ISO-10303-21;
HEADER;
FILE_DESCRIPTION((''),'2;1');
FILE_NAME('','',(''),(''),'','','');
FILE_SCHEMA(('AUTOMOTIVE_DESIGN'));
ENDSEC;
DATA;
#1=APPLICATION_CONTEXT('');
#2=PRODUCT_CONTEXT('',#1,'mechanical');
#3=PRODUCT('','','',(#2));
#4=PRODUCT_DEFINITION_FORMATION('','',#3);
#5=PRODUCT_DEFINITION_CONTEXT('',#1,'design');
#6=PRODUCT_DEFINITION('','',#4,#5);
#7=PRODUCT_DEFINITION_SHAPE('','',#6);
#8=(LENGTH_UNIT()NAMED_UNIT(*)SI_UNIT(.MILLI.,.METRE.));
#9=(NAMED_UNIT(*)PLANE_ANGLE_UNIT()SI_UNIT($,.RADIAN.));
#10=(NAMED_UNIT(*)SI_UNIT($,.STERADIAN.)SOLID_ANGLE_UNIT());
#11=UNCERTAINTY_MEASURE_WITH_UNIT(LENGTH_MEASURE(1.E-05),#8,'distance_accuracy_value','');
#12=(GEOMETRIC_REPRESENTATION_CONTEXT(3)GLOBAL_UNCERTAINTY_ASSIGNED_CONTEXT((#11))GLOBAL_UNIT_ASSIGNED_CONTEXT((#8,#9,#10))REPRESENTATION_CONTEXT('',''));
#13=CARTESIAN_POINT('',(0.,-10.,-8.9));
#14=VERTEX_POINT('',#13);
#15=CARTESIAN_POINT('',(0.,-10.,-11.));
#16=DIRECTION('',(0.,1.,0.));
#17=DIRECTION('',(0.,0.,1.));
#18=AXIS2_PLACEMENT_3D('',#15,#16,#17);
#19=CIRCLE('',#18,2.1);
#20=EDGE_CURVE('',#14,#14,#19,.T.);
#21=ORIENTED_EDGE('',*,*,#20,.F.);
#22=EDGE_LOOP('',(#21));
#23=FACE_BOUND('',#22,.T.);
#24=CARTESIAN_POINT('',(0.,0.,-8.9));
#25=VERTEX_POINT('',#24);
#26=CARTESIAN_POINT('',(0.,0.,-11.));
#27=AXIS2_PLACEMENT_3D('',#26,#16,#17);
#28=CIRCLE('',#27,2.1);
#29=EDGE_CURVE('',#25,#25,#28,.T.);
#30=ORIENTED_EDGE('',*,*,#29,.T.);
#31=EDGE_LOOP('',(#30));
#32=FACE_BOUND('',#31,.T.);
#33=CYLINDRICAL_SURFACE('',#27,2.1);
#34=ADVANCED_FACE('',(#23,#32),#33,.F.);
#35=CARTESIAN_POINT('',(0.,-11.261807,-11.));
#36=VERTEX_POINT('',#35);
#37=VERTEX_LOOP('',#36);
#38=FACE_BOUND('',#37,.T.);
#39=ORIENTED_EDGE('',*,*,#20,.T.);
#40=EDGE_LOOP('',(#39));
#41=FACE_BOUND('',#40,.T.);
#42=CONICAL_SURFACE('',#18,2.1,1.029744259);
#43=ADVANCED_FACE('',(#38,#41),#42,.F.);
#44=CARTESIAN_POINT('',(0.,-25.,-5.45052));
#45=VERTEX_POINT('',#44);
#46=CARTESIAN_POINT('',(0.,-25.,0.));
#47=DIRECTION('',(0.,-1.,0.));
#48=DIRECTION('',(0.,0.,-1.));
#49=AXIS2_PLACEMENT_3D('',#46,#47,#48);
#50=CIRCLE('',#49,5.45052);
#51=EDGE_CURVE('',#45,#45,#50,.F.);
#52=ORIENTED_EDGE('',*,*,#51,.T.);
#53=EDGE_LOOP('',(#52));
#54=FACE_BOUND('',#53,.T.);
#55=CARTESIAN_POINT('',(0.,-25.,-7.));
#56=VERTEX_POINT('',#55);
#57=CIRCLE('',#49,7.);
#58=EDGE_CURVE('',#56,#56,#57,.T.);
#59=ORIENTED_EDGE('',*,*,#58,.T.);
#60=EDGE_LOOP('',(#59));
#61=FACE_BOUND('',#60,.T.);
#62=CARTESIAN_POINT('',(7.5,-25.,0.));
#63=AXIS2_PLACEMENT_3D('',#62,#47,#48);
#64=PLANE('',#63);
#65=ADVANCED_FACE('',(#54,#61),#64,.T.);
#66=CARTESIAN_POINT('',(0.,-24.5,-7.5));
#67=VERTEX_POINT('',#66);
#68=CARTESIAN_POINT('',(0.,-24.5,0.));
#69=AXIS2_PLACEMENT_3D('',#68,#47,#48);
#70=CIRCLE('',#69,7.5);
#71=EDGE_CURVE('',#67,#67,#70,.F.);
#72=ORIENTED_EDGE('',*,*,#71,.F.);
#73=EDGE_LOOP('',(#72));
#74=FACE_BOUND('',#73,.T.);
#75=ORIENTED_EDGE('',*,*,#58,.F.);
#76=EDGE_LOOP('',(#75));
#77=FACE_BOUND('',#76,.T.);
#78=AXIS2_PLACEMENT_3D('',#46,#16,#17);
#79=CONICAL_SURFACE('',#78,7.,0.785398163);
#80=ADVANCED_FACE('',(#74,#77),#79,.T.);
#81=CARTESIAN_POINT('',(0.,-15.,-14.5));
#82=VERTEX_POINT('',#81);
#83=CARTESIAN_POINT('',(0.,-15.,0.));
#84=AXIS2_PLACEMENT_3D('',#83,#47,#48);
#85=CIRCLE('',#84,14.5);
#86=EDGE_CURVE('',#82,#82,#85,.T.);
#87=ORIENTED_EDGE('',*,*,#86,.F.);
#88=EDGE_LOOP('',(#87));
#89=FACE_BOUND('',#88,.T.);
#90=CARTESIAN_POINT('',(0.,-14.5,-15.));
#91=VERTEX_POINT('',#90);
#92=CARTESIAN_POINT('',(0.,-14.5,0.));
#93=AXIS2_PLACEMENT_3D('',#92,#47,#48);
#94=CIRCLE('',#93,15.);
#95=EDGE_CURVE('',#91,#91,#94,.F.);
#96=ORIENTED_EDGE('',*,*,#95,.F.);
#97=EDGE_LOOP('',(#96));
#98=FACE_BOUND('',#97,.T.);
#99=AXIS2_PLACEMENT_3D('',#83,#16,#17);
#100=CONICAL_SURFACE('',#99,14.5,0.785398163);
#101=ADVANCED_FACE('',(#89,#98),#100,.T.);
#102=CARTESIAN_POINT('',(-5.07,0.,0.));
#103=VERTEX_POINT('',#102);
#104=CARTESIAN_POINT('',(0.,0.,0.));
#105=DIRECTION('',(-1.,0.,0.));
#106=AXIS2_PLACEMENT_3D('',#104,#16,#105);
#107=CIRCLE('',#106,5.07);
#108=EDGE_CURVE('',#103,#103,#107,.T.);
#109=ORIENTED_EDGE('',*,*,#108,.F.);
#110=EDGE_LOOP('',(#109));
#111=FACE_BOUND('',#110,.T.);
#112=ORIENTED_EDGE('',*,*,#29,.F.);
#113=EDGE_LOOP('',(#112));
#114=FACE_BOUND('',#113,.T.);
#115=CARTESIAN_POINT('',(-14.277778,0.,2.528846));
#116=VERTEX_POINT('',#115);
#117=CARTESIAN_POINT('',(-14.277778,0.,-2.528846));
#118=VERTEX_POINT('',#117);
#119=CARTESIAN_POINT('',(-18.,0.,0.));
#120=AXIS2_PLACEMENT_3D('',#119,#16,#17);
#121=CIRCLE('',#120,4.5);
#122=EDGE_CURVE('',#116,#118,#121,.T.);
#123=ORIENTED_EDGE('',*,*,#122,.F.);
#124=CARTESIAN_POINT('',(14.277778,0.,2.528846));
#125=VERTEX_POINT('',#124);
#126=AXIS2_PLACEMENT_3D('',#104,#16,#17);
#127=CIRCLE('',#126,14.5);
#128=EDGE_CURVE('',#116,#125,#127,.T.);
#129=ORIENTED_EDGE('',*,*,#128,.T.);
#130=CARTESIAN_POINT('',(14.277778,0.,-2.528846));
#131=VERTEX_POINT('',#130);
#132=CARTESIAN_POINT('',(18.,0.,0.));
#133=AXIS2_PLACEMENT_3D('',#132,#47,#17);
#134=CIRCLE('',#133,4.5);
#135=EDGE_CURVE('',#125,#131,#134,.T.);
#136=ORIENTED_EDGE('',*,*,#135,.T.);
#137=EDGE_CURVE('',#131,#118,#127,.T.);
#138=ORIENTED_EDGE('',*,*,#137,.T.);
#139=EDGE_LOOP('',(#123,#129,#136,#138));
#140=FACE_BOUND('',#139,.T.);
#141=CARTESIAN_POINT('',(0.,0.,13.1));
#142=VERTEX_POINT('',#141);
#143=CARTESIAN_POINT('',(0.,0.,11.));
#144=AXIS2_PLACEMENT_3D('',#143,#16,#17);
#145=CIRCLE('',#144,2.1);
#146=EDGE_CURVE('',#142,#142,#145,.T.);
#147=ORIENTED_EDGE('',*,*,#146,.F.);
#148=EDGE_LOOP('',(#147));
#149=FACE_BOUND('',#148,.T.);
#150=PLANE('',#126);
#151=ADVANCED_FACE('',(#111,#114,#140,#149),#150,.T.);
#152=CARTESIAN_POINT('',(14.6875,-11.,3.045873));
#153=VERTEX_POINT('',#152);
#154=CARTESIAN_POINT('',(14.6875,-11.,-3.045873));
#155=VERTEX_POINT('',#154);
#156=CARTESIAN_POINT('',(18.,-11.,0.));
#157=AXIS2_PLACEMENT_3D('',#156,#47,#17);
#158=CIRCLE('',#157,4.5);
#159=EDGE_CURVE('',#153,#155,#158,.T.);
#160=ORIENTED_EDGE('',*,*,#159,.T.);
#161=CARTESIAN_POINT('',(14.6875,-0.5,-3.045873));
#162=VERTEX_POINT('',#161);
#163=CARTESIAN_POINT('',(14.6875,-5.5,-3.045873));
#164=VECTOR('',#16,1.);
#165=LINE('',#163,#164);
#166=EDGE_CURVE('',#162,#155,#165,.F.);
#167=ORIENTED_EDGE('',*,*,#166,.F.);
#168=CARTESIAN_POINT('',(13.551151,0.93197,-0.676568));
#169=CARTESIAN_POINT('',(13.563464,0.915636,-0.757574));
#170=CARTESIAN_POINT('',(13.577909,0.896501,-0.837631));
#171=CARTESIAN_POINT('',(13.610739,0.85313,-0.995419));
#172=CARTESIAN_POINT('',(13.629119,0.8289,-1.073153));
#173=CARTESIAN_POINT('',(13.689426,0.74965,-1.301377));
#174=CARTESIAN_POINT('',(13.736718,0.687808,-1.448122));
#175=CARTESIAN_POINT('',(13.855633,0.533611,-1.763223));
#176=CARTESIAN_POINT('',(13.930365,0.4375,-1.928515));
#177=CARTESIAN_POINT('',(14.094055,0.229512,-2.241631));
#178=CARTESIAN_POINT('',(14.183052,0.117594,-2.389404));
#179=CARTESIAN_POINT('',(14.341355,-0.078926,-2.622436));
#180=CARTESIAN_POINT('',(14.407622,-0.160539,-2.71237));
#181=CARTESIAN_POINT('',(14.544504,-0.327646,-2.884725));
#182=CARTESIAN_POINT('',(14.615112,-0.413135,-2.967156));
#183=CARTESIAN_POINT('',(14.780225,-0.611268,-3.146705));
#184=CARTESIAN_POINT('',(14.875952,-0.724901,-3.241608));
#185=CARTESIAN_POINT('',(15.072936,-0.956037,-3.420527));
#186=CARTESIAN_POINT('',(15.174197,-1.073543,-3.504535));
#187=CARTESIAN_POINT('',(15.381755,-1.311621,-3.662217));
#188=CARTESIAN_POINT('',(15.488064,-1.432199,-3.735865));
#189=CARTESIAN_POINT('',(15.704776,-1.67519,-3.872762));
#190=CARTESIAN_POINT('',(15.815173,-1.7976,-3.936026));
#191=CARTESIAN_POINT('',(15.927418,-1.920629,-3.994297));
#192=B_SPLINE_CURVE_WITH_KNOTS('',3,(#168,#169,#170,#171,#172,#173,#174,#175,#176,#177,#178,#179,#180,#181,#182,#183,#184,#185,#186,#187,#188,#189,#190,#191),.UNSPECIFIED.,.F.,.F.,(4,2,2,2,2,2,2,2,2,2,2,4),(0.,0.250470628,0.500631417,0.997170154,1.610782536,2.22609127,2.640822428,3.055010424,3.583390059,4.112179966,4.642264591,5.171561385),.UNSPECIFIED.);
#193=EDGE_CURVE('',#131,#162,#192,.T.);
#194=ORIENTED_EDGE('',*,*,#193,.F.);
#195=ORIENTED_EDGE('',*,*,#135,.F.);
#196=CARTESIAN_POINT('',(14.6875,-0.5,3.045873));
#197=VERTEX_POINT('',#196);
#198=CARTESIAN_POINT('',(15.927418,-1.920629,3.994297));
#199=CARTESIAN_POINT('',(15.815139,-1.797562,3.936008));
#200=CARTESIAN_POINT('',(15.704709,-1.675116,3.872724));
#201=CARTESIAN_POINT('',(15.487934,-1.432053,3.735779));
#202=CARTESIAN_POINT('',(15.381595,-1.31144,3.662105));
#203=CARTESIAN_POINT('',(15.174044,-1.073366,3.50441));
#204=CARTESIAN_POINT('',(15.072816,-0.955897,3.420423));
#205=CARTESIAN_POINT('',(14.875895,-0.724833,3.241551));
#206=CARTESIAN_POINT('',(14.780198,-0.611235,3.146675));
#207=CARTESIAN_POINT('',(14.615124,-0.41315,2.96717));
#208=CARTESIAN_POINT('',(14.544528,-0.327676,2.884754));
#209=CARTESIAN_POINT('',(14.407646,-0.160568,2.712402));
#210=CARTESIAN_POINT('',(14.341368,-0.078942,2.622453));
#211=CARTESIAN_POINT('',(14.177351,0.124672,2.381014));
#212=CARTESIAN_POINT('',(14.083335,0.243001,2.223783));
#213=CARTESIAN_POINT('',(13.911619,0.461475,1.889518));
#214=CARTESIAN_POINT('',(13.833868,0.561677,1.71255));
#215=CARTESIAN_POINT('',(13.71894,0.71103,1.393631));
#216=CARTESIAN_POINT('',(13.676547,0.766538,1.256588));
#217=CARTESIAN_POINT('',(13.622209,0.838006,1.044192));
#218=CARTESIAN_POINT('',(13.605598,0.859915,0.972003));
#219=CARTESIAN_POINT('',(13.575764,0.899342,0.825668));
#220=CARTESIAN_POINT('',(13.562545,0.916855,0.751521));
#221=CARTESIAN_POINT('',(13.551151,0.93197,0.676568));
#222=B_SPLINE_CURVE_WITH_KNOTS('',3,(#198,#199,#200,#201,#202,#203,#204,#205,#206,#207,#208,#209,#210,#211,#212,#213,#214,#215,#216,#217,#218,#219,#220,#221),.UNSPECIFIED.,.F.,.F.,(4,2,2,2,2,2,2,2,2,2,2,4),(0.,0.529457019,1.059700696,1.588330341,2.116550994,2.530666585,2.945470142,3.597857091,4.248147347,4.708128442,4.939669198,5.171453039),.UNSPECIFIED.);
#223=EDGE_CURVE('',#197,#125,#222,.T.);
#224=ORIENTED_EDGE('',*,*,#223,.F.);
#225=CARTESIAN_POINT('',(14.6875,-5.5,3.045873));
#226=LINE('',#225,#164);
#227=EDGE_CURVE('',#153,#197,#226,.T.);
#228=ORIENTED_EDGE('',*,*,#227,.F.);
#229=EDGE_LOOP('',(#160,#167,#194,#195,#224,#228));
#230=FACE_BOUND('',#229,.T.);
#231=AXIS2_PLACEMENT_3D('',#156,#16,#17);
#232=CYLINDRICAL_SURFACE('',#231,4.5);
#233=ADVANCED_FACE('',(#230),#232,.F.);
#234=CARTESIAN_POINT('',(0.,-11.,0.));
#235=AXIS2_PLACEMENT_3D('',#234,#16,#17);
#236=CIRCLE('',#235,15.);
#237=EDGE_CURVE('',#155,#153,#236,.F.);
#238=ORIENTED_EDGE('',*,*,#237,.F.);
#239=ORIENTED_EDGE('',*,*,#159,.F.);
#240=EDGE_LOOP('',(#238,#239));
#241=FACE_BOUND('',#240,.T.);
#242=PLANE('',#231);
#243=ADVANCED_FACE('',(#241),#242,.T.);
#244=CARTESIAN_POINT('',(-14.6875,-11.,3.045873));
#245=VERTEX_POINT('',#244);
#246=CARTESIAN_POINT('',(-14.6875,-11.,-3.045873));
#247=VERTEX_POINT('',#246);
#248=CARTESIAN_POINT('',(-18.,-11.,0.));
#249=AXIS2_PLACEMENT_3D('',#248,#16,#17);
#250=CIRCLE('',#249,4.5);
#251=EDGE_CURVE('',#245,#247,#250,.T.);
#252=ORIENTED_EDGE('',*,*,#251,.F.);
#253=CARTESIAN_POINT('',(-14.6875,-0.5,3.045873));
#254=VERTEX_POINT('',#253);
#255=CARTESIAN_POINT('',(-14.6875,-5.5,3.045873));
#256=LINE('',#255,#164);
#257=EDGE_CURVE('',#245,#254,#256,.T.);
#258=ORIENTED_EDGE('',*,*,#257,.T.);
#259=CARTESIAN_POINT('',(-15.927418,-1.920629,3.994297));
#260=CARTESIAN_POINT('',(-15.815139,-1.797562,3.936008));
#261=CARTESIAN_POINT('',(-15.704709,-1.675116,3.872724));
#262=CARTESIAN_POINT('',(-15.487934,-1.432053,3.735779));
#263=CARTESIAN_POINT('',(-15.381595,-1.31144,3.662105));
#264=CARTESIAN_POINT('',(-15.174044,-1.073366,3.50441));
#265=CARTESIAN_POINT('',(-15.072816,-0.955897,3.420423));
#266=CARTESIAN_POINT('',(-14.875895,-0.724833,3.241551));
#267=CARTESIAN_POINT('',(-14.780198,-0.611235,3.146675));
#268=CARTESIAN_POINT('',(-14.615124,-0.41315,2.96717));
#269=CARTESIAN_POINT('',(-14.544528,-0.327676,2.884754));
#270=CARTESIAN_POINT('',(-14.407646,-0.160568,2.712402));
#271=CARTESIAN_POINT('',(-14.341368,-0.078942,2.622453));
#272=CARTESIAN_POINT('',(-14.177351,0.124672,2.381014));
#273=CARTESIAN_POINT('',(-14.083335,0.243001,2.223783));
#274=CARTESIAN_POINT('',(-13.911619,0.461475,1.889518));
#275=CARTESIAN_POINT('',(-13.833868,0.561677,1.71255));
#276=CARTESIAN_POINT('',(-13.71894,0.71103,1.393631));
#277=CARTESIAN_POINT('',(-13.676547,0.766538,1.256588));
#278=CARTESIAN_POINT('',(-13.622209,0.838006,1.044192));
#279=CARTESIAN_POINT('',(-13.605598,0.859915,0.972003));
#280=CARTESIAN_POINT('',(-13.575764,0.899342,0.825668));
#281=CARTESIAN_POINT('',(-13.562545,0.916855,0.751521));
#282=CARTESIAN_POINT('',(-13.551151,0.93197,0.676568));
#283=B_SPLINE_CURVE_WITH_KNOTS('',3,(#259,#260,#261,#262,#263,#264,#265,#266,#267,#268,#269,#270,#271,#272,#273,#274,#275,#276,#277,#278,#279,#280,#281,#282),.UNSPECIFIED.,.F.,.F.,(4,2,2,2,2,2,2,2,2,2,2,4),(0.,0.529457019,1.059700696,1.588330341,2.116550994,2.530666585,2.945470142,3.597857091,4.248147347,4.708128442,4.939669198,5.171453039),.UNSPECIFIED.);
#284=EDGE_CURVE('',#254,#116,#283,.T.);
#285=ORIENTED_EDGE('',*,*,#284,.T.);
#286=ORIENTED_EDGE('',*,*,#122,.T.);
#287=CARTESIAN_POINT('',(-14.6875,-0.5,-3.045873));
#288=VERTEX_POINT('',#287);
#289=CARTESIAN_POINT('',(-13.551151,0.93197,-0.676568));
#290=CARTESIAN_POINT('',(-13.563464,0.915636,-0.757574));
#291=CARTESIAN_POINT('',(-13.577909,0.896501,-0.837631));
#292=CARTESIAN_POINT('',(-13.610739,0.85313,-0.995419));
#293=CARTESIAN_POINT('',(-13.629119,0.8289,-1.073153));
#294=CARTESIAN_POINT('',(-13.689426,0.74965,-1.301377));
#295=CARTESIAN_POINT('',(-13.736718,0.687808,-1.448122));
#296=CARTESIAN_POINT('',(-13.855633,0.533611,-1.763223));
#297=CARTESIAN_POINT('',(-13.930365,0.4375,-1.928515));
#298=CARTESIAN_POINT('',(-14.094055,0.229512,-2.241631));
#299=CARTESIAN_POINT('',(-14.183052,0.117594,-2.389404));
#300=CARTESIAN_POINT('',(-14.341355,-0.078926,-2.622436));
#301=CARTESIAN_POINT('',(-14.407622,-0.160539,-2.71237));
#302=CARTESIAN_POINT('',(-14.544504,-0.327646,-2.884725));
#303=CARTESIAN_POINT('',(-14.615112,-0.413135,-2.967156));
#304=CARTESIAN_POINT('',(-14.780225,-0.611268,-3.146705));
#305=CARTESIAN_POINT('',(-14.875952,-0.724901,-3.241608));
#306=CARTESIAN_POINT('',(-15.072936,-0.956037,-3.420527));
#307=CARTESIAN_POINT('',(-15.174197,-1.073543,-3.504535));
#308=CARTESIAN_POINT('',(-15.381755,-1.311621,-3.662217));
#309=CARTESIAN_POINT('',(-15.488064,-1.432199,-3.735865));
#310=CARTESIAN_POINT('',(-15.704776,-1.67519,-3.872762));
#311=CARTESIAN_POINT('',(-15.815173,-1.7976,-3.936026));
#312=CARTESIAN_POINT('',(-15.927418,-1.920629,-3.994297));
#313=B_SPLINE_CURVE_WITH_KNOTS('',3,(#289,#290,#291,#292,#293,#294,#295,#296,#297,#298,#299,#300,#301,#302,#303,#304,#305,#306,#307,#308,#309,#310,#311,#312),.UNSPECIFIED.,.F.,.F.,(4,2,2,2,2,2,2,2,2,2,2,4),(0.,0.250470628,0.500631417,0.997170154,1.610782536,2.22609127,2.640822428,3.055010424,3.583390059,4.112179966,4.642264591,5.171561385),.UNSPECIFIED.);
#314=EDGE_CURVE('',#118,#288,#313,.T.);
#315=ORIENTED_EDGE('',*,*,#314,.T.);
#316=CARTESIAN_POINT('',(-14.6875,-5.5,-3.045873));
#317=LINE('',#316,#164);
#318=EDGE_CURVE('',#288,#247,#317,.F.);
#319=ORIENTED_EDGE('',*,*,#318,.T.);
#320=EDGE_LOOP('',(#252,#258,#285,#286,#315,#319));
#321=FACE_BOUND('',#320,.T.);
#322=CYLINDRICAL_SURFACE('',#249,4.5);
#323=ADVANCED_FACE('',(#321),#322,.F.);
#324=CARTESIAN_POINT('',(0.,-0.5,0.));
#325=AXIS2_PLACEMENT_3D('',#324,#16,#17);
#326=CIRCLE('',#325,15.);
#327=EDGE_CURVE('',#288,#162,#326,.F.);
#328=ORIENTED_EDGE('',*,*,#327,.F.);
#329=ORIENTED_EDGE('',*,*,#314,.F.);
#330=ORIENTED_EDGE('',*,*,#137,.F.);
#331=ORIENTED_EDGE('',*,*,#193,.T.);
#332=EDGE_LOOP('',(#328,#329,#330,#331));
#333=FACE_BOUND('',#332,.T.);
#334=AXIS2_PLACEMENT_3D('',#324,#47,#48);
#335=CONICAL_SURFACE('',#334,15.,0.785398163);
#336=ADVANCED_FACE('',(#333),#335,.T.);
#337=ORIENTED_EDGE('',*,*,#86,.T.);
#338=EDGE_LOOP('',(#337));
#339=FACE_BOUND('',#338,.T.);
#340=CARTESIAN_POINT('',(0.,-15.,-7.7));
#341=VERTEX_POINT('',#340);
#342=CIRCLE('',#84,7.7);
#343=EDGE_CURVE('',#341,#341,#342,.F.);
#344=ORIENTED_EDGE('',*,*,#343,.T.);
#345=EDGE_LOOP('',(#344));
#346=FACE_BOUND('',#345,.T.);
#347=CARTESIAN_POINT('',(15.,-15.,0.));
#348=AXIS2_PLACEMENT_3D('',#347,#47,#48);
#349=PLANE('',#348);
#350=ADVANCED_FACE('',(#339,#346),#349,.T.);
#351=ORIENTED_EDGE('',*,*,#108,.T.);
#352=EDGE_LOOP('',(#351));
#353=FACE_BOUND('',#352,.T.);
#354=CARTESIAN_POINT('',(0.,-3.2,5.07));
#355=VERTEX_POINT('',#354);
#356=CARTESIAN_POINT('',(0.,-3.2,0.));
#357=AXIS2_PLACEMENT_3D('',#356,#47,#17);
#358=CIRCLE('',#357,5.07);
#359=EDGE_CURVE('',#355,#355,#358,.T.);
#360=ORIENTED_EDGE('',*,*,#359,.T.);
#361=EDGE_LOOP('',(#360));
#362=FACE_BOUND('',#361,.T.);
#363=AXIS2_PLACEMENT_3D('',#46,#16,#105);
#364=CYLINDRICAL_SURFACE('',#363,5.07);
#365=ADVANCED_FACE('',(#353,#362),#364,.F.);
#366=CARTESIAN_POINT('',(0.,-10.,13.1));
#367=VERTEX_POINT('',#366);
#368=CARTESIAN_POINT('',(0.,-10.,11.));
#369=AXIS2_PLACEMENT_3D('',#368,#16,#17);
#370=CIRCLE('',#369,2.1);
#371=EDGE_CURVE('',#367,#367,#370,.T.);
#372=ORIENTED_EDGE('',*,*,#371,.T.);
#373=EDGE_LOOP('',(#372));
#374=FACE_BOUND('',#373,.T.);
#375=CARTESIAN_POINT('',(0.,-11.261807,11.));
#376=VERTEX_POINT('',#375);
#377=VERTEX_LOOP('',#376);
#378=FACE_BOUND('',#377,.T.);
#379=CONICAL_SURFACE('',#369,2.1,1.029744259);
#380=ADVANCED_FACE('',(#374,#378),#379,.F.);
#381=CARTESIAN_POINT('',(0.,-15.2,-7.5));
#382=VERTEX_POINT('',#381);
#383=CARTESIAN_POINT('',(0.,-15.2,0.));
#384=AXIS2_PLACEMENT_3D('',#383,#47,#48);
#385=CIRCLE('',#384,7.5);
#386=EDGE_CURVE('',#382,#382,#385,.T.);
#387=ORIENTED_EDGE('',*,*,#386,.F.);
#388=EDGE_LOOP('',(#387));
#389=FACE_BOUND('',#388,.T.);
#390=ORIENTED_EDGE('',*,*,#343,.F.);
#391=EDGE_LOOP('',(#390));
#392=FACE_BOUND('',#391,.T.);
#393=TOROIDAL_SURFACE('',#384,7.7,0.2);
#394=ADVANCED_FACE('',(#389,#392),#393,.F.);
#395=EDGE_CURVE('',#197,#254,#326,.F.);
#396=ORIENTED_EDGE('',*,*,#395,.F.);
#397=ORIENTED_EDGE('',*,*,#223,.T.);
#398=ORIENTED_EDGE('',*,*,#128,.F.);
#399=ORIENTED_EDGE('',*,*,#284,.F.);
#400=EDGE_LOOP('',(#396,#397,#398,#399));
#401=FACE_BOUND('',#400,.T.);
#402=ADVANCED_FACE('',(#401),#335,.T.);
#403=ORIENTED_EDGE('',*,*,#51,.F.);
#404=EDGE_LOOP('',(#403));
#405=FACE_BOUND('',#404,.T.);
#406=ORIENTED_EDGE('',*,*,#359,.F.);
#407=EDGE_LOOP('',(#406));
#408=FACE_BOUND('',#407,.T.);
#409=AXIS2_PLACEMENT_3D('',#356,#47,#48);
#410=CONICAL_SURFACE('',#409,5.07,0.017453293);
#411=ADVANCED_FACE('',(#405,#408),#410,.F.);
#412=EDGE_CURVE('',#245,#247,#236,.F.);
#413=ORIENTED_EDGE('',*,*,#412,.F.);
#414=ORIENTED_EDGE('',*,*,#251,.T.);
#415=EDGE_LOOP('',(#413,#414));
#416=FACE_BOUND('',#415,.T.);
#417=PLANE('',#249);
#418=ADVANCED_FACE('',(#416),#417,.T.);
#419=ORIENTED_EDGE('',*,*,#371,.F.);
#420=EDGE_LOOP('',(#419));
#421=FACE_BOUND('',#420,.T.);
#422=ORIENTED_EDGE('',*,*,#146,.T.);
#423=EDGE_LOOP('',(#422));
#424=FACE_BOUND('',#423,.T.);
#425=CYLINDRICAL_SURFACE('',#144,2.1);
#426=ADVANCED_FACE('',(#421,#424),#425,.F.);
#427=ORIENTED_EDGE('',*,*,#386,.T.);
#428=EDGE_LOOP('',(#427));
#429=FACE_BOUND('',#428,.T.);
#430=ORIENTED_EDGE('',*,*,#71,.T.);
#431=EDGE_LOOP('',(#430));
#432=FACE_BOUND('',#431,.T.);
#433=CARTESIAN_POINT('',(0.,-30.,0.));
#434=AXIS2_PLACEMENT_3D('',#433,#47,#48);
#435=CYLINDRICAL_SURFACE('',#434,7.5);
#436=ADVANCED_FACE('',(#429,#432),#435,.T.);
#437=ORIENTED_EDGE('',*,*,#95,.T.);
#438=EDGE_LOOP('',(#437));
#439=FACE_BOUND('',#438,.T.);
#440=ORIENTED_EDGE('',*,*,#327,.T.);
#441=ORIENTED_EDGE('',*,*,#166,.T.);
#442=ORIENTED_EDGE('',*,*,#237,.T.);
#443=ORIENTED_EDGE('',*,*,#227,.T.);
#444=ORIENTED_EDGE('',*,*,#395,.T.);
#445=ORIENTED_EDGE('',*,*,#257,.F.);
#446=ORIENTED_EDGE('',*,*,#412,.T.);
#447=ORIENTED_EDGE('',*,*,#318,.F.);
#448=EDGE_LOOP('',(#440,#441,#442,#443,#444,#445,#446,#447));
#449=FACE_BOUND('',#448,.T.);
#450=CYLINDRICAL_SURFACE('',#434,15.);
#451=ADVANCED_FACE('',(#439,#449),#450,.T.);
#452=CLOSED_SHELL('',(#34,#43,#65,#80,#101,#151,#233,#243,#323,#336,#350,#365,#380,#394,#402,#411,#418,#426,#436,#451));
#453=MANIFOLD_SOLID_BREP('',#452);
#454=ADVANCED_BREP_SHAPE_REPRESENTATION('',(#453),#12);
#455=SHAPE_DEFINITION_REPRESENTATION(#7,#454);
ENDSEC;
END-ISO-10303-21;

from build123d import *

# Parameters (mm, degrees)
SKETCH2_R             = 5.07
CUT_EXTRUDE1_DEPTH    = 33.787192622
CHAMFER1_SIZE         = 0.5
FILLET1_R             = 0.2
SKETCH3_R             = 4.5
CUT_EXTRUDE2_DEPTH    = 11
M5_TAPPED_HOLE1_D     = 4.2
M5_TAPPED_HOLE1_DEPTH = 10
M5_TAPPED_HOLE1_TIP   = 1.2618073


# Read off the part's stored shape, not the designer's step: Draft1
with BuildPart() as part:
    # Sketch1 → Revolve1 (revolve)
    with BuildSketch(Plane.XY, mode=Mode.PRIVATE) as revolve1_sk:
        Polygon((0, 0), (15, 0), (15, -15), (7.5, -15), (7.5, -25), (0, -25), align=None)
    revolve(revolve1_sk.sketch.rotate(Axis((0, -30, 0), (0, 1, 0)), 90), axis=Axis((0, -30, 0), (0, 1, 0)))

    # Sketch2 → Cut-Extrude1 (cut, through all)
    with BuildSketch(Plane(origin=(0, 0, 0), x_dir=(1, 0, 0), z_dir=(0, 1, 0))):
        with Locations(Location((0, 0, 0), (0, 0, 180))):
            Circle(SKETCH2_R)
    extrude(amount=-CUT_EXTRUDE1_DEPTH, mode=Mode.SUBTRACT)

    # Chamfer1
    chamfer1_edges = [part.edges().sort_by_distance(p)[0] for p in [
        (0, -25, 7.5),
        (0, -15, 15),
        (0, 0, 15),
    ]]
    chamfer(chamfer1_edges, length=CHAMFER1_SIZE)

    # Fillet1
    fillet1_edges = [part.edges().sort_by_distance(p)[0] for p in [
        (0, -15, 7.5),
    ]]
    fillet(fillet1_edges, radius=FILLET1_R)

    # Draft1 outline → Draft1 (revolve, cut)
    with BuildSketch(Plane.XY):
        Polygon((5.450520415, -25), (5.07, -3.2), (5.07, -25), align=None)
    revolve(axis=Axis((0, 0, 0), (0, 1, 0)), mode=Mode.SUBTRACT)

    # Sketch3 → Cut-Extrude2 (cut)
    with BuildSketch(Plane(origin=(0, 0, 0), x_dir=(1, 0, 0), z_dir=(0, 1, 0))):
        with Locations((-18, 0)):
            Circle(SKETCH3_R)
    cut_extrude2 = extrude(amount=-CUT_EXTRUDE2_DEPTH, mode=Mode.SUBTRACT)

    # Mirror1: Cut-Extrude2 across plane
    add(cut_extrude2.mirror(Plane(origin=(0, 0, 0), x_dir=(0, 0, 1), z_dir=(1, 0, 0))), mode=Mode.SUBTRACT)

    # M5 Tapped Hole1
    with Locations(Plane(origin=(0, 0, 0), x_dir=(1, 0, 0), z_dir=(0, 1, 0))):
        with Locations((0, 11), (0, -11)):
            Hole(M5_TAPPED_HOLE1_D / 2, depth=M5_TAPPED_HOLE1_DEPTH)
            with Locations((0, 0, -(M5_TAPPED_HOLE1_DEPTH + M5_TAPPED_HOLE1_TIP / 2))):  # 118° drill point
                Cone(0, M5_TAPPED_HOLE1_D / 2, M5_TAPPED_HOLE1_TIP, mode=Mode.SUBTRACT)


solid = part.part
